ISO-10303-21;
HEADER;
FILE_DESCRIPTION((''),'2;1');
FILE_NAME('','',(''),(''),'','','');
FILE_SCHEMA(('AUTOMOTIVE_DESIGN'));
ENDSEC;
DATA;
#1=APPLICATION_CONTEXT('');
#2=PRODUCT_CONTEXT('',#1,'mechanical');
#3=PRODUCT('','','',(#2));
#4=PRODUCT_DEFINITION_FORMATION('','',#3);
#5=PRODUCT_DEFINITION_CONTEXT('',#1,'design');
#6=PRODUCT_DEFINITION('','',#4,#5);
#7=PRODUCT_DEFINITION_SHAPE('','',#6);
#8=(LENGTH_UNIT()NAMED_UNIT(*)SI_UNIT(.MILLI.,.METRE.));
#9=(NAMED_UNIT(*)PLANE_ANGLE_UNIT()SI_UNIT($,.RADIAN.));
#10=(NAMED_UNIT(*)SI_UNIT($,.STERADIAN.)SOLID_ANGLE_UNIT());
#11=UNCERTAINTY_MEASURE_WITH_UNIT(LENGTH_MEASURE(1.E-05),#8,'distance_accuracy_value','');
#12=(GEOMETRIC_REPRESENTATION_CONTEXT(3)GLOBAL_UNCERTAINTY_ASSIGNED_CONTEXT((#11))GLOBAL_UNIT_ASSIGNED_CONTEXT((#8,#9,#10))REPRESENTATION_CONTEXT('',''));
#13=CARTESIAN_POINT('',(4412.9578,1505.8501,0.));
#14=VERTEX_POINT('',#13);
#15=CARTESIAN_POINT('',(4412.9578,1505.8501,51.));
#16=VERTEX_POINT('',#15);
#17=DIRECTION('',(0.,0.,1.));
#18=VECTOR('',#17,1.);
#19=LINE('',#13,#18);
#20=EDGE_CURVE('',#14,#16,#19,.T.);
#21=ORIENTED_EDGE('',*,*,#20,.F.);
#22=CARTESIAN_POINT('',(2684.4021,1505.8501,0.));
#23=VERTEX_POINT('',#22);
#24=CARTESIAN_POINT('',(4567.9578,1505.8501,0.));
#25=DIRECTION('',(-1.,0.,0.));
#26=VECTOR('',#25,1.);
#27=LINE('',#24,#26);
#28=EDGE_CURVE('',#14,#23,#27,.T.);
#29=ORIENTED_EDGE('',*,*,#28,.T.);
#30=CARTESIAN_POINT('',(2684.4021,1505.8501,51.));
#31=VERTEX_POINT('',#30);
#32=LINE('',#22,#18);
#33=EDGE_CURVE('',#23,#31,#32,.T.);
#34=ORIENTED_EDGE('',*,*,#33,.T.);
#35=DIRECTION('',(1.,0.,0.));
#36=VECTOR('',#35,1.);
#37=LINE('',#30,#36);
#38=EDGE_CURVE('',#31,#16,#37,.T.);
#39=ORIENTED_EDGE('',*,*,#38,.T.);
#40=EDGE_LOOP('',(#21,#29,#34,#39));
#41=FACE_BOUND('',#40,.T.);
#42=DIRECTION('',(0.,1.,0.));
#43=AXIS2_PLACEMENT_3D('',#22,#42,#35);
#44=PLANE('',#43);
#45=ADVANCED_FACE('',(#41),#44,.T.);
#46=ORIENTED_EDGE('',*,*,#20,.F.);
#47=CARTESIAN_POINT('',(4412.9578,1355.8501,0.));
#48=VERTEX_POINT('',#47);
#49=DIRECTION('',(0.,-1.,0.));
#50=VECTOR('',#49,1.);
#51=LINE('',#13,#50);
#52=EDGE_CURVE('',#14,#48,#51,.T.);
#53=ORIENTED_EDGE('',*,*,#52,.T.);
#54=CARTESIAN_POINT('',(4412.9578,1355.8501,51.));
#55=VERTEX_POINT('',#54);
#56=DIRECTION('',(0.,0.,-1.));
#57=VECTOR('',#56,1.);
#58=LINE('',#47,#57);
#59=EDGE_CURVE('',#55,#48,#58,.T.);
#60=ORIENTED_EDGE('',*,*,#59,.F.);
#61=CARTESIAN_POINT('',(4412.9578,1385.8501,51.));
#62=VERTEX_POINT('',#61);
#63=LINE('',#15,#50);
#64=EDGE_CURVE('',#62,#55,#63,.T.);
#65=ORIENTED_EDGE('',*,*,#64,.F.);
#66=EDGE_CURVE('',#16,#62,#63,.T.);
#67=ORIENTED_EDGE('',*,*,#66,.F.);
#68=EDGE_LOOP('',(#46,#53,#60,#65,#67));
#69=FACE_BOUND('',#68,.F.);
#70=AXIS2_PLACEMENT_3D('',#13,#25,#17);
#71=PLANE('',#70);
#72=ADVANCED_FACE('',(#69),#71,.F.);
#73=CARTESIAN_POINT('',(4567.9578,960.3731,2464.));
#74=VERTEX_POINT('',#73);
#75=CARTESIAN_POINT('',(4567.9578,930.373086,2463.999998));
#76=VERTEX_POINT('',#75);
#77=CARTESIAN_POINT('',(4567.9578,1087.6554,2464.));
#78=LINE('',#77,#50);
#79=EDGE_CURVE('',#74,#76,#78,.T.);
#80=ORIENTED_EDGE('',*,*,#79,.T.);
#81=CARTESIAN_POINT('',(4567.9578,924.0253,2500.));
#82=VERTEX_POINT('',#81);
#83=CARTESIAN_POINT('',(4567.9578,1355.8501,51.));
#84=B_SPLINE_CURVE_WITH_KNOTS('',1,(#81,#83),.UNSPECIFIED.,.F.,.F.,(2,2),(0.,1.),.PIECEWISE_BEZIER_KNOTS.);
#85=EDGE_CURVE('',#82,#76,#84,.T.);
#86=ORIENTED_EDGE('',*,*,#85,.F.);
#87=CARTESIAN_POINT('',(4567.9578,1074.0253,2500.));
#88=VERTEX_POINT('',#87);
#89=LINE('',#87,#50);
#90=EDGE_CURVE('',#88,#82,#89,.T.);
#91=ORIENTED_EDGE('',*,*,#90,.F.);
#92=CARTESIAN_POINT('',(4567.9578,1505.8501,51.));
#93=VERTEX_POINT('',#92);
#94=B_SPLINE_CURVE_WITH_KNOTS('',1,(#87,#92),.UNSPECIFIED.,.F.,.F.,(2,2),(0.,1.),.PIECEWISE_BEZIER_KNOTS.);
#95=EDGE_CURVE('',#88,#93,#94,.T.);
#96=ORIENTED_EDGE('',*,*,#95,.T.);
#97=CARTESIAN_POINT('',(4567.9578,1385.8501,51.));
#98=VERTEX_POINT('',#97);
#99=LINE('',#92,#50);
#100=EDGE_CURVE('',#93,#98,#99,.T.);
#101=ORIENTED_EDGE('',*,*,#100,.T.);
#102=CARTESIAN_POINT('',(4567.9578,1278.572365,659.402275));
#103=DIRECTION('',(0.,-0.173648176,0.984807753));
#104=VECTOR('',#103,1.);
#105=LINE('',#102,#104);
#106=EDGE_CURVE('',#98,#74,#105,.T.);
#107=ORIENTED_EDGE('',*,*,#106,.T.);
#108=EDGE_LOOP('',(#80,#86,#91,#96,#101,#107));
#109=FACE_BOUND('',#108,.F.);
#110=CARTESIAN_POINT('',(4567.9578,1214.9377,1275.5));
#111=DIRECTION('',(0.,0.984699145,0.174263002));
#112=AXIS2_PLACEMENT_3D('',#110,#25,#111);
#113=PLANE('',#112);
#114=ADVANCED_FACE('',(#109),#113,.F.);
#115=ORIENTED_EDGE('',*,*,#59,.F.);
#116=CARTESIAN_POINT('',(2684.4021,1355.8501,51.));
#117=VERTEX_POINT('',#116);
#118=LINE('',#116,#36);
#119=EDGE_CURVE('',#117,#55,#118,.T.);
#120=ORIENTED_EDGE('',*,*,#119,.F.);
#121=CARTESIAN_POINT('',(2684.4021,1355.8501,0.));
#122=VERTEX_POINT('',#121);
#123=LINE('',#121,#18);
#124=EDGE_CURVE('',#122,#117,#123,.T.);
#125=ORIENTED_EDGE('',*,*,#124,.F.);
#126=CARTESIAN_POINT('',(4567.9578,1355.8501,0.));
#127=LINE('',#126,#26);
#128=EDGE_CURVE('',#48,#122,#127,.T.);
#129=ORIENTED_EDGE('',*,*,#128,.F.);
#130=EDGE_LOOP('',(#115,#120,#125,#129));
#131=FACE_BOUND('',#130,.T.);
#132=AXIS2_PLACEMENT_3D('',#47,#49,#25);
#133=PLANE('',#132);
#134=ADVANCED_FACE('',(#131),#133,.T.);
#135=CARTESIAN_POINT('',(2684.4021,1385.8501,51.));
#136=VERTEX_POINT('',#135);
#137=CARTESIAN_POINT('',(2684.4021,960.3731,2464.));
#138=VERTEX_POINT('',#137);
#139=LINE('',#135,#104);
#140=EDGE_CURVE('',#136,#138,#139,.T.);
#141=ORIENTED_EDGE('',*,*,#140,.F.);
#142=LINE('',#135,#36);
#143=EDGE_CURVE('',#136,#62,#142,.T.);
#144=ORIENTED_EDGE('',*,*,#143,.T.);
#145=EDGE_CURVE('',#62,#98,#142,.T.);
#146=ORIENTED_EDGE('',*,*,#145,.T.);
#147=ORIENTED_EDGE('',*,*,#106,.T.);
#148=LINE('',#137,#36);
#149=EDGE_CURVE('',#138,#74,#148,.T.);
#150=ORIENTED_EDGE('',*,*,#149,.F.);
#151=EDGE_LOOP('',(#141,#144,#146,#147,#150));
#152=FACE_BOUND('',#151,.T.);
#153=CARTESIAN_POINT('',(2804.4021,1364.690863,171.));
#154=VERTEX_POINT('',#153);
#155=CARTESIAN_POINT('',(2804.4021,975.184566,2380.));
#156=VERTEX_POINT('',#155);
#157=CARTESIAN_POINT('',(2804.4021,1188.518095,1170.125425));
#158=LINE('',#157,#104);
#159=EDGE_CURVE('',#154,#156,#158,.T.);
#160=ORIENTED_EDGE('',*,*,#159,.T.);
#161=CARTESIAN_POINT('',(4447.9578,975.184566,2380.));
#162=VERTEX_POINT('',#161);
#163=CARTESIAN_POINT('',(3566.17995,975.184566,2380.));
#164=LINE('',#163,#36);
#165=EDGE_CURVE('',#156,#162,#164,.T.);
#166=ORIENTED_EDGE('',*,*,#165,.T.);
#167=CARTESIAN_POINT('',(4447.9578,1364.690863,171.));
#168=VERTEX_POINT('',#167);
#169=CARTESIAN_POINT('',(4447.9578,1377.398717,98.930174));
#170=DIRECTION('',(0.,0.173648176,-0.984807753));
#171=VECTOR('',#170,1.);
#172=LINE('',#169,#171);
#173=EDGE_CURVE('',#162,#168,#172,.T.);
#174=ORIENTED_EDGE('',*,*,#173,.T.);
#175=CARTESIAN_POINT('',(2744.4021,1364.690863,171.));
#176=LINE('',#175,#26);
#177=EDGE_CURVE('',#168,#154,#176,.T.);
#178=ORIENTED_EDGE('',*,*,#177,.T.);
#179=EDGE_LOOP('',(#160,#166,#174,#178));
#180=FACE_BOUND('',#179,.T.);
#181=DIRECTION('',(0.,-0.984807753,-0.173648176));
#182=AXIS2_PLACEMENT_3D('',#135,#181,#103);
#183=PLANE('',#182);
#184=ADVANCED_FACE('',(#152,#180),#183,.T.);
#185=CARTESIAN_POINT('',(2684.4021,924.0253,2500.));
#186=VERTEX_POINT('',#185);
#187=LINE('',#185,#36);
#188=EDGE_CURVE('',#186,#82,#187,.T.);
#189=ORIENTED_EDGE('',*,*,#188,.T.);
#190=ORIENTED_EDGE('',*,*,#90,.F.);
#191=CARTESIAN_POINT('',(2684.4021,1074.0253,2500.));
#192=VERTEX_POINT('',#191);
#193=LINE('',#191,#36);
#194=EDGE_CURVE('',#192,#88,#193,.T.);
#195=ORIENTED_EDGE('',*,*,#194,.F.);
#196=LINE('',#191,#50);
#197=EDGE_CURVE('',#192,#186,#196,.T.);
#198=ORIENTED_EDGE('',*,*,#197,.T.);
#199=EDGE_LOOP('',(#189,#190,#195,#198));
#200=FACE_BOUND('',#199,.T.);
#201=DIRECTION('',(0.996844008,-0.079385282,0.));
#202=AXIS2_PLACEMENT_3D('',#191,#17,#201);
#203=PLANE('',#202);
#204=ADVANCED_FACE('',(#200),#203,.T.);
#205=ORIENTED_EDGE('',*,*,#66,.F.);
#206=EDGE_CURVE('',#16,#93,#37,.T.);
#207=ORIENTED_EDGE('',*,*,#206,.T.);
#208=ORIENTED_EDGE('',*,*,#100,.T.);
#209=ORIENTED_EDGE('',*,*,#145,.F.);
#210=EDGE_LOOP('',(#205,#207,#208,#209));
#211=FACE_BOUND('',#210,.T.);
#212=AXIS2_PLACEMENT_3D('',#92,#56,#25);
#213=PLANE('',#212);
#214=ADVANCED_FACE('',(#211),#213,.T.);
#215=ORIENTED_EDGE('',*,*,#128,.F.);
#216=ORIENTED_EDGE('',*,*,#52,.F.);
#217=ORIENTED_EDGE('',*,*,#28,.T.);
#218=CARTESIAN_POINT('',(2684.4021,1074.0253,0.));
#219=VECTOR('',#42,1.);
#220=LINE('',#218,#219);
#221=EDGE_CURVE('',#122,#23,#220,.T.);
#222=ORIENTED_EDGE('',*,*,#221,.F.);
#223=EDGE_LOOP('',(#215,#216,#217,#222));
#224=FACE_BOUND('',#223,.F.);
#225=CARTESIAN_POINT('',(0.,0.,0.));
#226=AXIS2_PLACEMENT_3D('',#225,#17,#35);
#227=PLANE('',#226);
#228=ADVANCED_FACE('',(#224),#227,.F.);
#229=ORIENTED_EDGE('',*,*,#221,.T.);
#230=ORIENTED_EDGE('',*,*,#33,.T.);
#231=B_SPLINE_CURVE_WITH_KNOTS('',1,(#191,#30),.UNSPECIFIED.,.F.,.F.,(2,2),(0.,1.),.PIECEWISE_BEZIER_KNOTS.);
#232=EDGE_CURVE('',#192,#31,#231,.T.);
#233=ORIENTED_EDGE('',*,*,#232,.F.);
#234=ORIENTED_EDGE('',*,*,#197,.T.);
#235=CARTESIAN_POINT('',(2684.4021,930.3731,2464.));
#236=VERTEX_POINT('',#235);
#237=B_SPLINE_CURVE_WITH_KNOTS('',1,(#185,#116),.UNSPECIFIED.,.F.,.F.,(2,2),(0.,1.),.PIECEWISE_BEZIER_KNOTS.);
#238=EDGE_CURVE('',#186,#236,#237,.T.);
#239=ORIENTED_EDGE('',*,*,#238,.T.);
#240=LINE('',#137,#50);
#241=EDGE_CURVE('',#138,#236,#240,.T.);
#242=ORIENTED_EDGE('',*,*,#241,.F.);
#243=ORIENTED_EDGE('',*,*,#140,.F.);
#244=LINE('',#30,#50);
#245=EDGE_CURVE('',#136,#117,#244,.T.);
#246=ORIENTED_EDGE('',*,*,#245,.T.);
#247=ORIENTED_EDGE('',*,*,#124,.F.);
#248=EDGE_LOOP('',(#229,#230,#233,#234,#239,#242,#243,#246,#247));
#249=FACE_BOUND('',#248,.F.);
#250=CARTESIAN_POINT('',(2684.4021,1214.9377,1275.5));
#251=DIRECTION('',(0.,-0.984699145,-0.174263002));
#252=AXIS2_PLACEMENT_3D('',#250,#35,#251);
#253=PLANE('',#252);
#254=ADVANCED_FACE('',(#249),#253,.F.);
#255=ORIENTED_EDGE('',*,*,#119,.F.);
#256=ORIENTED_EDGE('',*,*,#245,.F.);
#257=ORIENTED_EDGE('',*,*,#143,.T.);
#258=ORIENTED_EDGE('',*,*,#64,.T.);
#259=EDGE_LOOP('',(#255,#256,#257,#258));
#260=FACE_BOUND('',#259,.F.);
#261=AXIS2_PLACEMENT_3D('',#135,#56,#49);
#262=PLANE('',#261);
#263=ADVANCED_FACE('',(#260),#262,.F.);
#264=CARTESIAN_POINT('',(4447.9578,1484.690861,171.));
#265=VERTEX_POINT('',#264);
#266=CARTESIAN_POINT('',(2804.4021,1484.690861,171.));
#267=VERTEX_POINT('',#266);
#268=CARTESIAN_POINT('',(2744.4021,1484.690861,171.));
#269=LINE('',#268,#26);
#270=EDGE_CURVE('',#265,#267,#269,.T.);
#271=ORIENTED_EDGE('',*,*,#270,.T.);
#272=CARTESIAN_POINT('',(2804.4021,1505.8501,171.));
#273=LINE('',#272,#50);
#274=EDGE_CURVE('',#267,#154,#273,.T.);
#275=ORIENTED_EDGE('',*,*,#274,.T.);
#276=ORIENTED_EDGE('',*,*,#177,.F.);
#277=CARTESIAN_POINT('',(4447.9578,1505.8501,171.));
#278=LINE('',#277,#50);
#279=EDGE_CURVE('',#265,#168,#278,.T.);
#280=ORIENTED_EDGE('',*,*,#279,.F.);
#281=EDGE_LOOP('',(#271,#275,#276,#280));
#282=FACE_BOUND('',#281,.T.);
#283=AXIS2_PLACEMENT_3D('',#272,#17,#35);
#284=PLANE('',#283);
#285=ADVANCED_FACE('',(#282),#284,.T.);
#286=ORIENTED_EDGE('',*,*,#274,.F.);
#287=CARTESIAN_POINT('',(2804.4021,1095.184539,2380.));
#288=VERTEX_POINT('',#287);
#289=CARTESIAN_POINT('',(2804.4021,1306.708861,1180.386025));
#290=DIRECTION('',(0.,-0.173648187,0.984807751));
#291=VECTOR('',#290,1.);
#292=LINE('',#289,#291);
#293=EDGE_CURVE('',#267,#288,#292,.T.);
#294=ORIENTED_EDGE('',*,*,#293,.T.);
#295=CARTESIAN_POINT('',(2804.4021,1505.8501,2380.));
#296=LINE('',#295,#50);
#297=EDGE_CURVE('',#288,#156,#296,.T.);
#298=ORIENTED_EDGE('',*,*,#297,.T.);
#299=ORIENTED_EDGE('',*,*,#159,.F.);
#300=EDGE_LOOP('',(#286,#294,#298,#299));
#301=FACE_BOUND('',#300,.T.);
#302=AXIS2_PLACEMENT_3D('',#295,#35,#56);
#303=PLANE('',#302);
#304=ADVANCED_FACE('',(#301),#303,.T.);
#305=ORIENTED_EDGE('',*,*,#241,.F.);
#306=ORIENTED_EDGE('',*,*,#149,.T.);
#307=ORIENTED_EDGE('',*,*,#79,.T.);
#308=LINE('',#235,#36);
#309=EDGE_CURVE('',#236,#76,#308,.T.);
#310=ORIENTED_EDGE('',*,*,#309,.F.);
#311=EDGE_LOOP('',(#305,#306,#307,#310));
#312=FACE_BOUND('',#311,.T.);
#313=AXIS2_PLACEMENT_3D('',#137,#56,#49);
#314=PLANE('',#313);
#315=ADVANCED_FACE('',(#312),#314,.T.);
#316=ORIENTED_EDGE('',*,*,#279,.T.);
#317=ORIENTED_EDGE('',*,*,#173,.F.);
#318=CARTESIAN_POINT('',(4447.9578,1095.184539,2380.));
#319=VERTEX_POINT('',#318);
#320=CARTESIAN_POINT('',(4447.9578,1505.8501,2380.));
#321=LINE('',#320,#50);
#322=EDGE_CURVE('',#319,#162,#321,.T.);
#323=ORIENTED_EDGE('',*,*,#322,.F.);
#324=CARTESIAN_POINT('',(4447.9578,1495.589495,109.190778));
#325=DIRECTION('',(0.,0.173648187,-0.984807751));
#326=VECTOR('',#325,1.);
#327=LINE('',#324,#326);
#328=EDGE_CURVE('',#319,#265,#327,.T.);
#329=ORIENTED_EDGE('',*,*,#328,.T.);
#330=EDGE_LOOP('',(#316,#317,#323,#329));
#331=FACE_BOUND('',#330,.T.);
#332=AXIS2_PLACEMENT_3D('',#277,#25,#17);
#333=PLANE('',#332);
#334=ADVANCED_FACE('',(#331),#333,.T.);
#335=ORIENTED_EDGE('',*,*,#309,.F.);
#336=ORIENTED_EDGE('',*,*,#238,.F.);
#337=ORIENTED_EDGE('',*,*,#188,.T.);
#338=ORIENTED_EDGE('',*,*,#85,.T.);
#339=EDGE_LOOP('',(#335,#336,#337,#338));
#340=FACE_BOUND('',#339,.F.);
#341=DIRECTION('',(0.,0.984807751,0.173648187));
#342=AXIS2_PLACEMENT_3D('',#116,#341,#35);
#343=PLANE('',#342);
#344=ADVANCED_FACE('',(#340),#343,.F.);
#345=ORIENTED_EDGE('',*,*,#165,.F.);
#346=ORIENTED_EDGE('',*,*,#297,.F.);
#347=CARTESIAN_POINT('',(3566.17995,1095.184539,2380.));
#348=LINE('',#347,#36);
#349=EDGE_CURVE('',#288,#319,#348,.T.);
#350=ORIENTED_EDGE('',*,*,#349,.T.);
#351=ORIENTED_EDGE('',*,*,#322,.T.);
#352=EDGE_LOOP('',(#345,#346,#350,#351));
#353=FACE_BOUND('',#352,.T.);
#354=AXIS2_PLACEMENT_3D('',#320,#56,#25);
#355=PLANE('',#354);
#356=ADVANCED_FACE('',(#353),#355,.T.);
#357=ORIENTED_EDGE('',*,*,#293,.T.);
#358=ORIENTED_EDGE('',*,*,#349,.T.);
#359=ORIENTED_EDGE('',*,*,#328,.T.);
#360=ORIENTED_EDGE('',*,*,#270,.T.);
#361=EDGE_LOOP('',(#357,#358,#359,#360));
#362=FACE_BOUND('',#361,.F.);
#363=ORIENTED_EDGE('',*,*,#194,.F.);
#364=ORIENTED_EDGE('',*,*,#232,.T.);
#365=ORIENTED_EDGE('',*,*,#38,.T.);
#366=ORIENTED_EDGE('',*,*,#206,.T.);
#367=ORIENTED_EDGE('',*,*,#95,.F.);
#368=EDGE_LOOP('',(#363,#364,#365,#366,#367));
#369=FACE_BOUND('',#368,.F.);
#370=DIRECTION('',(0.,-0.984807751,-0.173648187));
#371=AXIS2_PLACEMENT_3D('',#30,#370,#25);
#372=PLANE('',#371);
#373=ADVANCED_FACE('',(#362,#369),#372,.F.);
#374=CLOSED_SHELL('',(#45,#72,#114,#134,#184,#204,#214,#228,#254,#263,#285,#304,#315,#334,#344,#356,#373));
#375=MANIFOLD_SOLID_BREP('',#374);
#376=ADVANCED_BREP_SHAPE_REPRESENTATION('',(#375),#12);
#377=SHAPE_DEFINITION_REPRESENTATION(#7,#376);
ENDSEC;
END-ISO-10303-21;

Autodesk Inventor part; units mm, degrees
sketch "Sketch2" plane through (0, 0, 0) normal (0, 0, 1) x (1, 0, 0)
  line L0 (-4731.265, 1505.8501) -> (4722.9578, 1505.8501)
  line L1 (2684.4021, 1074.0253) -> (2684.4021, 1505.8501)
  line L2 (4412.9578, -1494.1499) -> (4412.9578, 1505.8501)
  line L3 (4722.9578, -1494.1499) -> (4722.9578, 1505.8501)
  line L4 (4412.9578, 1505.8501) -> (4722.9578, 1505.8501)
  line L5 (4567.9578, 1505.8501) -> (4567.9578, 1355.8501)
  line L6 (4567.9578, 1355.8501) -> (2684.4021, 1355.8501)
  point P0 (0, 0)
  dimension "d0" = 150
ref_plane "Work Plane2" through (0, 0, 2500) normal (0, 0, 1) x (1, 0, 0)
ref_plane "Work Plane1" through (0, 0, 0) normal (0, 0, 1) x (1, 0, 0)
sketch "Sketch3" plane through (0, 0, 2500) normal (0, 0, 1) x (1, 0, 0)
  line L0 (2684.4021, 1074.0253) -> (2684.4021, 1505.8501) projected
  point P0 (0, 0)
extrude "Extrusion1" add sketch "Sketch2" along normal blind 51
ref_plane "Work Plane3" through (4722.9578, 1505.8501, 51) normal (0, 0, 1) x (-1, 0, 0)
sketch "Sketch4" plane through (4722.9578, 1505.8501, 51) normal (0, 0, 1) x (-1, 0, 0)
  line L0 (155, 150) -> (155, 0) projected
  line L1 (155, 0) -> (2038.5557, 0) projected
  line L2 (2038.5557, 0) -> (2038.5557, 150) projected
  line L3 (2038.5557, 150) -> (155, 150) projected
  line L4 (2038.5557, 150) -> (155, 150) projected
  line L5 (2038.5557, 0) -> (155, 0)
  line L6 (155, 0) -> (155, 150)
  line L7 (155, 150) -> (2038.5557, 150)
  line L8 (2038.5557, 150) -> (2038.5557, 0)
  point P0 (4722.9578, 1505.8501)
ref_plane "Work Plane4" through (2684.4021, 1505.8501, 51) normal (-1, 0, 0) x (0, -1, 0)
sketch "Sketch5" plane through (2684.4021, 1505.8501, 51) normal (-1, 0, 0) x (0, -1, 0)
  line L0 (150, 0) -> (0, 0) projected
  line L1 (0, 0) -> (150, 0) projected
  line L2 (0, 0) -> (150, 0)
  line L3 (431.8248, 2449) -> (0, 2449) projected
  line L4 (431.8248, 2449) -> (581.8248, 2449)
  line L5 (0, 0) -> (431.8248, 2449)
  line L6 (0, 0) -> (2486.7798, 0) construction
  line L7 (150, 0) -> (581.8248, 2449)
  line L8 (150, 0) -> (2636.7798, 0) construction
  point P0 (1505.8501, -51)
  dimension "d5" = 80
  dimension "d6" = 80
sketch "Sketch6" plane through (0, 0, 2500) normal (0, 0, 1) x (1, 0, 0)
  line L0 (2684.4021, 1074.0253) -> (2684.4021, 924.0253) projected
  line L1 (4567.9578, 1074.0253) -> (4567.9578, 924.0253)
  line L2 (2684.4021, 1074.0253) -> (4567.9578, 1074.0253)
  line L3 (2684.4021, 924.0253) -> (4567.9578, 924.0253)
  line L4 (4567.9578, 1074.0253) -> (4567.9578, 924.0253)
  line L5 (2684.4021, 1074.0253) -> (4567.9578, 1074.0253)
  line L6 (4567.9578, 1074.0253) -> (4567.9578, 924.0253)
  line L7 (4567.9578, 924.0253) -> (2684.4021, 924.0253)
  line L8 (2684.4021, 924.0253) -> (2684.4021, 1074.0253)
  point P0 (0, 0)
loft "Loft1" add profiles "Sketch6" section 2 edges at (4567.9578, 1430.8501, 51) (3626.18, 1505.8501, 51) (2684.4021, 1430.8501, 51) (3626.18, 1355.8501, 51)
sketch "Sketch7" plane through (2684.4021, 1505.8501, 51) normal (-1, 0, 0) x (0, -1, 0)
  line L0 (0, 0) -> (150, 0) projected
  line L1 (581.8248, 2449) -> (150, 0) projected
  line L2 (431.8248, 2449) -> (581.8248, 2449) projected
  line L3 (499.9267, 2449) -> (499.9267, 2413)
  line L4 (545.477, 2413) -> (575.477, 2413)
  line L5 (150, 0) -> (120, 0)
  line L6 (120, 0) -> (545.477, 2413)
  line L7 (120, 0) -> (2570.2244, 0) construction
  line L8 (150, 0) -> (575.477, 2413)
  line L9 (545.477, 2413) -> (575.477, 2413)
  line L10 (545.477, 2413) -> (575.477, 2413)
  line L11 (150, -51) -> (0, -51) projected
  point P0 (1505.8501, -51)
  dimension "d11" = 36
  dimension "d12" = 30
  dimension "d13" = 80
extrude "Extrusion2" cut sketch "Sketch7" against normal through all
ref_plane "Work Plane5" through (4722.9578, 1505.8501, 0) normal (0, 1, 0) x (-1, 0, 0)
sketch "Sketch8" plane through (4722.9578, 1505.8501, 0) normal (0, 1, 0) x (-1, 0, 0)
  line L0 (155, 2500) -> (2038.5557, 2500) projected
  line L1 (155, 2500) -> (155, 51) projected
  line L2 (155, 51) -> (2038.5557, 51) projected
  line L3 (2038.5557, 2500) -> (2038.5557, 51) projected
  line L4 (2038.5557, 51) -> (2038.5557, 2464) projected
  line L5 (2038.5557, 51) -> (1918.5557, 51)
  line L6 (1918.5557, 51) -> (1918.5557, 171)
  line L7 (1918.5557, 171) -> (2038.5557, 171)
  line L8 (2038.5557, 171) -> (2038.5557, 51)
  line L9 (155, 2500) -> (275, 2500)
  line L10 (275, 2500) -> (275, 2380)
  line L11 (275, 2380) -> (155, 2380)
  line L12 (155, 2380) -> (155, 2500)
  line L13 (1918.5557, 171) -> (275, 171)
  line L14 (275, 171) -> (275, 2380)
  line L15 (275, 2380) -> (1918.5557, 2380)
  line L16 (1918.5557, 2380) -> (1918.5557, 171)
  point P0 (4722.9578, 0)
  dimension "d16" = 120
  dimension "d17" = 120
  dimension "d18" = 120
  dimension "d19" = 120
extrude "Extrusion3" cut sketch "Sketch8" against normal through all contours L15 L16 L13 L14
sketch "Sketch9" plane through (2684.4021, 1505.8501, 0) normal (0, 1, 0) x (1, 0, 0)
  line L0 (1883.5557, 0) -> (0, 0) projected
  line L1 (0, 0) -> (0, -51) projected
  line L2 (1883.5557, -51) -> (0, -51) projected
  line L3 (1883.5557, 0) -> (1883.5557, -51) projected
  line L4 (1883.5557, 0) -> (1728.5557, 0)
  line L5 (1728.5557, 0) -> (1728.5557, -51)
  line L6 (1728.5557, -51) -> (1883.5557, -51)
  line L7 (1883.5557, -51) -> (1883.5557, 0)
  point P0 (-2684.4021, 0)
  point P1 (1728.5557, 0)
  dimension "d22" = 155
extrude "Extrusion4" cut sketch "Sketch9" against normal through all contours L3 L2 L5 L0
properties part number "eave_frame_02" material "Wood (Maple)"
